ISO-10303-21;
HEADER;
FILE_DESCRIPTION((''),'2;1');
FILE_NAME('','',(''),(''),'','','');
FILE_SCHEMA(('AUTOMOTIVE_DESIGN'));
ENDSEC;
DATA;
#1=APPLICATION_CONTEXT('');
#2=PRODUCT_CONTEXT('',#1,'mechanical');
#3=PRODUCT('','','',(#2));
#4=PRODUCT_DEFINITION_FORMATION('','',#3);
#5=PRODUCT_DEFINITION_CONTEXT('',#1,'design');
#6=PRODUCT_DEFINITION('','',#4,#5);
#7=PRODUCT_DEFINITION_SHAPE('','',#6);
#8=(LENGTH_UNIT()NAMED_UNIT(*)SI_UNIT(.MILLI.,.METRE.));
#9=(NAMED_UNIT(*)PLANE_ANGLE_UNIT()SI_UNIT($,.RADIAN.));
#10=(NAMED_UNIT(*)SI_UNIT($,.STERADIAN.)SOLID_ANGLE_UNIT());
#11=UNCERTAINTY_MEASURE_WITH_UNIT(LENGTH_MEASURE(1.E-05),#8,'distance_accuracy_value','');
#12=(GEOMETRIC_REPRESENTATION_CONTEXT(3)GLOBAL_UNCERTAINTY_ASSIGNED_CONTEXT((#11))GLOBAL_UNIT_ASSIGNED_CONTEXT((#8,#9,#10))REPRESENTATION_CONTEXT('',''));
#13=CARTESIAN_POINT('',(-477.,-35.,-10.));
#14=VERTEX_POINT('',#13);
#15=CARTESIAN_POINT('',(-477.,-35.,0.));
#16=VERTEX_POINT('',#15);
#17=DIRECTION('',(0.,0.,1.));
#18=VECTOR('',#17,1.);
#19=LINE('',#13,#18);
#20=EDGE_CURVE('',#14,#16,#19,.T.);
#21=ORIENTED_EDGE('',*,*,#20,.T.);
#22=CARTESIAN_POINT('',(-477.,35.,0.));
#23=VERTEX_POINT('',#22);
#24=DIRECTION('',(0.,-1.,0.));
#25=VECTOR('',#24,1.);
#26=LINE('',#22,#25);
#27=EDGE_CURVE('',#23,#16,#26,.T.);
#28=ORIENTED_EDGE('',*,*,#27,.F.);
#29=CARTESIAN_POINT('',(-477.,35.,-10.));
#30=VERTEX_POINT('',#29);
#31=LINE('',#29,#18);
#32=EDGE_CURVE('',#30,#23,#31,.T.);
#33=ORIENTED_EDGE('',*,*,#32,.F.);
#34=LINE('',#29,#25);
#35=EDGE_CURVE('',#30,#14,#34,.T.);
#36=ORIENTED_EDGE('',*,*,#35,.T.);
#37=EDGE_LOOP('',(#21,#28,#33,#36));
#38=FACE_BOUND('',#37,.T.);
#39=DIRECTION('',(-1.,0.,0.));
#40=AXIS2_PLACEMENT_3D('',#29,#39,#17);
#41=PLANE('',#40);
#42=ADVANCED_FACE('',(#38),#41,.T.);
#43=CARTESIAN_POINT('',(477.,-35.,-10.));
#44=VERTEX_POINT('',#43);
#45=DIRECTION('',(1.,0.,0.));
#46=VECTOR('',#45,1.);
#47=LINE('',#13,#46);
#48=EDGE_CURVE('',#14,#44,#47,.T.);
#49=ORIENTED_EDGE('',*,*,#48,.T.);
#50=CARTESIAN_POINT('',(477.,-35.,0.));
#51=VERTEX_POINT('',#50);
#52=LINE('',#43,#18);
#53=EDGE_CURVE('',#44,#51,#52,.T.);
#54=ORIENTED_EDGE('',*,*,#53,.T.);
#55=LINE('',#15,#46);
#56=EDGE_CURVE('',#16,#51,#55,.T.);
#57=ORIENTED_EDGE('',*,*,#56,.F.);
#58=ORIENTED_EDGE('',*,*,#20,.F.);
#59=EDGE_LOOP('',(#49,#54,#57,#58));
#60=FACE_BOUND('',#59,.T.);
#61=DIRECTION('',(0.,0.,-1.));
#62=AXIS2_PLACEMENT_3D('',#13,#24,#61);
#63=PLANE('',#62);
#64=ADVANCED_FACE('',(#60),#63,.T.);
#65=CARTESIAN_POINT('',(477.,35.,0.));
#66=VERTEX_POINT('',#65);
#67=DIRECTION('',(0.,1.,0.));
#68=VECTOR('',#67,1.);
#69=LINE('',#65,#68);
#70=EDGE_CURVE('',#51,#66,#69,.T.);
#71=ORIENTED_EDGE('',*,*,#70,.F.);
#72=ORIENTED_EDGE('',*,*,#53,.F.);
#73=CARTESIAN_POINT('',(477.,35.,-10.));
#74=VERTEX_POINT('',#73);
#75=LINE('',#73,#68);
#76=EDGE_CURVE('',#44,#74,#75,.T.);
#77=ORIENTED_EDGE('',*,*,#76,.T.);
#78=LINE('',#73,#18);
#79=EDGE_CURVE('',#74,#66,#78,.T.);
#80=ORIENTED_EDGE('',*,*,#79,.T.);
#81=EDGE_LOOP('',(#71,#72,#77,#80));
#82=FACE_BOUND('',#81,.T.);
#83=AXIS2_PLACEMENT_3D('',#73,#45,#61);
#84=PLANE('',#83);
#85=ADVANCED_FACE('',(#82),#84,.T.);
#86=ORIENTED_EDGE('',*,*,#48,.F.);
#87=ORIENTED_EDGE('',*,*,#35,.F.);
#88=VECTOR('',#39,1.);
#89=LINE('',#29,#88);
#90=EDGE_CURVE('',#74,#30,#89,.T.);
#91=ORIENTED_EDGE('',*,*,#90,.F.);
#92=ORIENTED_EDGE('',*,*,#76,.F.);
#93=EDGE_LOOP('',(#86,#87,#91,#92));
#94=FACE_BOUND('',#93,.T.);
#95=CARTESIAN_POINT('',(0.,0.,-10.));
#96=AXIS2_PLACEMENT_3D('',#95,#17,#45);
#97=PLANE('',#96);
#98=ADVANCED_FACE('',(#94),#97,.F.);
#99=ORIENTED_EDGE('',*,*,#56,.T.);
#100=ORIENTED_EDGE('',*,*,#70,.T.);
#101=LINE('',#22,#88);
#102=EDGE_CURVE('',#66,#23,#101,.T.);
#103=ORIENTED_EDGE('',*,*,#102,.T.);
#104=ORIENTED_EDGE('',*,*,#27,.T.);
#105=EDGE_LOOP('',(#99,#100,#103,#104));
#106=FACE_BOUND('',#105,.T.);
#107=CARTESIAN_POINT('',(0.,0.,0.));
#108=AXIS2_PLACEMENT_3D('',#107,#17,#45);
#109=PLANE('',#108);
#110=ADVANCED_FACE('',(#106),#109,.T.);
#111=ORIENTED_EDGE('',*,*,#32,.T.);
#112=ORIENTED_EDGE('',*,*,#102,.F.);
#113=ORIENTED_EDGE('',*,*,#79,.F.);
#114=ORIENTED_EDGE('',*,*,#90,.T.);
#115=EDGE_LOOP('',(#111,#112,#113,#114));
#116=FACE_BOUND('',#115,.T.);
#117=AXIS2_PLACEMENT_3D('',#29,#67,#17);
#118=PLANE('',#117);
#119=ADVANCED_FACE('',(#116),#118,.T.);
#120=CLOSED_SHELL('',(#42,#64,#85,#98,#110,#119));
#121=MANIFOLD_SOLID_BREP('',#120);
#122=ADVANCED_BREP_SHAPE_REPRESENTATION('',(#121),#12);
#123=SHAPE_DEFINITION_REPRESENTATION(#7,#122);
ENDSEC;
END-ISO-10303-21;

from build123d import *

# Parameters (mm, degrees)
SKETCH_2_W             = 954
SKETCH_2_H             = 70
SM_BASE_FLANGE_1_DEPTH = 10


# Sheet-metal steps are written as plain solids
with BuildPart() as part:
    # Sketch 2 → 基体-法兰1 (new body)
    with BuildSketch(Plane.XY):
        Rectangle(SKETCH_2_W, SKETCH_2_H)
    extrude(amount=-SM_BASE_FLANGE_1_DEPTH)


solid = part.part
